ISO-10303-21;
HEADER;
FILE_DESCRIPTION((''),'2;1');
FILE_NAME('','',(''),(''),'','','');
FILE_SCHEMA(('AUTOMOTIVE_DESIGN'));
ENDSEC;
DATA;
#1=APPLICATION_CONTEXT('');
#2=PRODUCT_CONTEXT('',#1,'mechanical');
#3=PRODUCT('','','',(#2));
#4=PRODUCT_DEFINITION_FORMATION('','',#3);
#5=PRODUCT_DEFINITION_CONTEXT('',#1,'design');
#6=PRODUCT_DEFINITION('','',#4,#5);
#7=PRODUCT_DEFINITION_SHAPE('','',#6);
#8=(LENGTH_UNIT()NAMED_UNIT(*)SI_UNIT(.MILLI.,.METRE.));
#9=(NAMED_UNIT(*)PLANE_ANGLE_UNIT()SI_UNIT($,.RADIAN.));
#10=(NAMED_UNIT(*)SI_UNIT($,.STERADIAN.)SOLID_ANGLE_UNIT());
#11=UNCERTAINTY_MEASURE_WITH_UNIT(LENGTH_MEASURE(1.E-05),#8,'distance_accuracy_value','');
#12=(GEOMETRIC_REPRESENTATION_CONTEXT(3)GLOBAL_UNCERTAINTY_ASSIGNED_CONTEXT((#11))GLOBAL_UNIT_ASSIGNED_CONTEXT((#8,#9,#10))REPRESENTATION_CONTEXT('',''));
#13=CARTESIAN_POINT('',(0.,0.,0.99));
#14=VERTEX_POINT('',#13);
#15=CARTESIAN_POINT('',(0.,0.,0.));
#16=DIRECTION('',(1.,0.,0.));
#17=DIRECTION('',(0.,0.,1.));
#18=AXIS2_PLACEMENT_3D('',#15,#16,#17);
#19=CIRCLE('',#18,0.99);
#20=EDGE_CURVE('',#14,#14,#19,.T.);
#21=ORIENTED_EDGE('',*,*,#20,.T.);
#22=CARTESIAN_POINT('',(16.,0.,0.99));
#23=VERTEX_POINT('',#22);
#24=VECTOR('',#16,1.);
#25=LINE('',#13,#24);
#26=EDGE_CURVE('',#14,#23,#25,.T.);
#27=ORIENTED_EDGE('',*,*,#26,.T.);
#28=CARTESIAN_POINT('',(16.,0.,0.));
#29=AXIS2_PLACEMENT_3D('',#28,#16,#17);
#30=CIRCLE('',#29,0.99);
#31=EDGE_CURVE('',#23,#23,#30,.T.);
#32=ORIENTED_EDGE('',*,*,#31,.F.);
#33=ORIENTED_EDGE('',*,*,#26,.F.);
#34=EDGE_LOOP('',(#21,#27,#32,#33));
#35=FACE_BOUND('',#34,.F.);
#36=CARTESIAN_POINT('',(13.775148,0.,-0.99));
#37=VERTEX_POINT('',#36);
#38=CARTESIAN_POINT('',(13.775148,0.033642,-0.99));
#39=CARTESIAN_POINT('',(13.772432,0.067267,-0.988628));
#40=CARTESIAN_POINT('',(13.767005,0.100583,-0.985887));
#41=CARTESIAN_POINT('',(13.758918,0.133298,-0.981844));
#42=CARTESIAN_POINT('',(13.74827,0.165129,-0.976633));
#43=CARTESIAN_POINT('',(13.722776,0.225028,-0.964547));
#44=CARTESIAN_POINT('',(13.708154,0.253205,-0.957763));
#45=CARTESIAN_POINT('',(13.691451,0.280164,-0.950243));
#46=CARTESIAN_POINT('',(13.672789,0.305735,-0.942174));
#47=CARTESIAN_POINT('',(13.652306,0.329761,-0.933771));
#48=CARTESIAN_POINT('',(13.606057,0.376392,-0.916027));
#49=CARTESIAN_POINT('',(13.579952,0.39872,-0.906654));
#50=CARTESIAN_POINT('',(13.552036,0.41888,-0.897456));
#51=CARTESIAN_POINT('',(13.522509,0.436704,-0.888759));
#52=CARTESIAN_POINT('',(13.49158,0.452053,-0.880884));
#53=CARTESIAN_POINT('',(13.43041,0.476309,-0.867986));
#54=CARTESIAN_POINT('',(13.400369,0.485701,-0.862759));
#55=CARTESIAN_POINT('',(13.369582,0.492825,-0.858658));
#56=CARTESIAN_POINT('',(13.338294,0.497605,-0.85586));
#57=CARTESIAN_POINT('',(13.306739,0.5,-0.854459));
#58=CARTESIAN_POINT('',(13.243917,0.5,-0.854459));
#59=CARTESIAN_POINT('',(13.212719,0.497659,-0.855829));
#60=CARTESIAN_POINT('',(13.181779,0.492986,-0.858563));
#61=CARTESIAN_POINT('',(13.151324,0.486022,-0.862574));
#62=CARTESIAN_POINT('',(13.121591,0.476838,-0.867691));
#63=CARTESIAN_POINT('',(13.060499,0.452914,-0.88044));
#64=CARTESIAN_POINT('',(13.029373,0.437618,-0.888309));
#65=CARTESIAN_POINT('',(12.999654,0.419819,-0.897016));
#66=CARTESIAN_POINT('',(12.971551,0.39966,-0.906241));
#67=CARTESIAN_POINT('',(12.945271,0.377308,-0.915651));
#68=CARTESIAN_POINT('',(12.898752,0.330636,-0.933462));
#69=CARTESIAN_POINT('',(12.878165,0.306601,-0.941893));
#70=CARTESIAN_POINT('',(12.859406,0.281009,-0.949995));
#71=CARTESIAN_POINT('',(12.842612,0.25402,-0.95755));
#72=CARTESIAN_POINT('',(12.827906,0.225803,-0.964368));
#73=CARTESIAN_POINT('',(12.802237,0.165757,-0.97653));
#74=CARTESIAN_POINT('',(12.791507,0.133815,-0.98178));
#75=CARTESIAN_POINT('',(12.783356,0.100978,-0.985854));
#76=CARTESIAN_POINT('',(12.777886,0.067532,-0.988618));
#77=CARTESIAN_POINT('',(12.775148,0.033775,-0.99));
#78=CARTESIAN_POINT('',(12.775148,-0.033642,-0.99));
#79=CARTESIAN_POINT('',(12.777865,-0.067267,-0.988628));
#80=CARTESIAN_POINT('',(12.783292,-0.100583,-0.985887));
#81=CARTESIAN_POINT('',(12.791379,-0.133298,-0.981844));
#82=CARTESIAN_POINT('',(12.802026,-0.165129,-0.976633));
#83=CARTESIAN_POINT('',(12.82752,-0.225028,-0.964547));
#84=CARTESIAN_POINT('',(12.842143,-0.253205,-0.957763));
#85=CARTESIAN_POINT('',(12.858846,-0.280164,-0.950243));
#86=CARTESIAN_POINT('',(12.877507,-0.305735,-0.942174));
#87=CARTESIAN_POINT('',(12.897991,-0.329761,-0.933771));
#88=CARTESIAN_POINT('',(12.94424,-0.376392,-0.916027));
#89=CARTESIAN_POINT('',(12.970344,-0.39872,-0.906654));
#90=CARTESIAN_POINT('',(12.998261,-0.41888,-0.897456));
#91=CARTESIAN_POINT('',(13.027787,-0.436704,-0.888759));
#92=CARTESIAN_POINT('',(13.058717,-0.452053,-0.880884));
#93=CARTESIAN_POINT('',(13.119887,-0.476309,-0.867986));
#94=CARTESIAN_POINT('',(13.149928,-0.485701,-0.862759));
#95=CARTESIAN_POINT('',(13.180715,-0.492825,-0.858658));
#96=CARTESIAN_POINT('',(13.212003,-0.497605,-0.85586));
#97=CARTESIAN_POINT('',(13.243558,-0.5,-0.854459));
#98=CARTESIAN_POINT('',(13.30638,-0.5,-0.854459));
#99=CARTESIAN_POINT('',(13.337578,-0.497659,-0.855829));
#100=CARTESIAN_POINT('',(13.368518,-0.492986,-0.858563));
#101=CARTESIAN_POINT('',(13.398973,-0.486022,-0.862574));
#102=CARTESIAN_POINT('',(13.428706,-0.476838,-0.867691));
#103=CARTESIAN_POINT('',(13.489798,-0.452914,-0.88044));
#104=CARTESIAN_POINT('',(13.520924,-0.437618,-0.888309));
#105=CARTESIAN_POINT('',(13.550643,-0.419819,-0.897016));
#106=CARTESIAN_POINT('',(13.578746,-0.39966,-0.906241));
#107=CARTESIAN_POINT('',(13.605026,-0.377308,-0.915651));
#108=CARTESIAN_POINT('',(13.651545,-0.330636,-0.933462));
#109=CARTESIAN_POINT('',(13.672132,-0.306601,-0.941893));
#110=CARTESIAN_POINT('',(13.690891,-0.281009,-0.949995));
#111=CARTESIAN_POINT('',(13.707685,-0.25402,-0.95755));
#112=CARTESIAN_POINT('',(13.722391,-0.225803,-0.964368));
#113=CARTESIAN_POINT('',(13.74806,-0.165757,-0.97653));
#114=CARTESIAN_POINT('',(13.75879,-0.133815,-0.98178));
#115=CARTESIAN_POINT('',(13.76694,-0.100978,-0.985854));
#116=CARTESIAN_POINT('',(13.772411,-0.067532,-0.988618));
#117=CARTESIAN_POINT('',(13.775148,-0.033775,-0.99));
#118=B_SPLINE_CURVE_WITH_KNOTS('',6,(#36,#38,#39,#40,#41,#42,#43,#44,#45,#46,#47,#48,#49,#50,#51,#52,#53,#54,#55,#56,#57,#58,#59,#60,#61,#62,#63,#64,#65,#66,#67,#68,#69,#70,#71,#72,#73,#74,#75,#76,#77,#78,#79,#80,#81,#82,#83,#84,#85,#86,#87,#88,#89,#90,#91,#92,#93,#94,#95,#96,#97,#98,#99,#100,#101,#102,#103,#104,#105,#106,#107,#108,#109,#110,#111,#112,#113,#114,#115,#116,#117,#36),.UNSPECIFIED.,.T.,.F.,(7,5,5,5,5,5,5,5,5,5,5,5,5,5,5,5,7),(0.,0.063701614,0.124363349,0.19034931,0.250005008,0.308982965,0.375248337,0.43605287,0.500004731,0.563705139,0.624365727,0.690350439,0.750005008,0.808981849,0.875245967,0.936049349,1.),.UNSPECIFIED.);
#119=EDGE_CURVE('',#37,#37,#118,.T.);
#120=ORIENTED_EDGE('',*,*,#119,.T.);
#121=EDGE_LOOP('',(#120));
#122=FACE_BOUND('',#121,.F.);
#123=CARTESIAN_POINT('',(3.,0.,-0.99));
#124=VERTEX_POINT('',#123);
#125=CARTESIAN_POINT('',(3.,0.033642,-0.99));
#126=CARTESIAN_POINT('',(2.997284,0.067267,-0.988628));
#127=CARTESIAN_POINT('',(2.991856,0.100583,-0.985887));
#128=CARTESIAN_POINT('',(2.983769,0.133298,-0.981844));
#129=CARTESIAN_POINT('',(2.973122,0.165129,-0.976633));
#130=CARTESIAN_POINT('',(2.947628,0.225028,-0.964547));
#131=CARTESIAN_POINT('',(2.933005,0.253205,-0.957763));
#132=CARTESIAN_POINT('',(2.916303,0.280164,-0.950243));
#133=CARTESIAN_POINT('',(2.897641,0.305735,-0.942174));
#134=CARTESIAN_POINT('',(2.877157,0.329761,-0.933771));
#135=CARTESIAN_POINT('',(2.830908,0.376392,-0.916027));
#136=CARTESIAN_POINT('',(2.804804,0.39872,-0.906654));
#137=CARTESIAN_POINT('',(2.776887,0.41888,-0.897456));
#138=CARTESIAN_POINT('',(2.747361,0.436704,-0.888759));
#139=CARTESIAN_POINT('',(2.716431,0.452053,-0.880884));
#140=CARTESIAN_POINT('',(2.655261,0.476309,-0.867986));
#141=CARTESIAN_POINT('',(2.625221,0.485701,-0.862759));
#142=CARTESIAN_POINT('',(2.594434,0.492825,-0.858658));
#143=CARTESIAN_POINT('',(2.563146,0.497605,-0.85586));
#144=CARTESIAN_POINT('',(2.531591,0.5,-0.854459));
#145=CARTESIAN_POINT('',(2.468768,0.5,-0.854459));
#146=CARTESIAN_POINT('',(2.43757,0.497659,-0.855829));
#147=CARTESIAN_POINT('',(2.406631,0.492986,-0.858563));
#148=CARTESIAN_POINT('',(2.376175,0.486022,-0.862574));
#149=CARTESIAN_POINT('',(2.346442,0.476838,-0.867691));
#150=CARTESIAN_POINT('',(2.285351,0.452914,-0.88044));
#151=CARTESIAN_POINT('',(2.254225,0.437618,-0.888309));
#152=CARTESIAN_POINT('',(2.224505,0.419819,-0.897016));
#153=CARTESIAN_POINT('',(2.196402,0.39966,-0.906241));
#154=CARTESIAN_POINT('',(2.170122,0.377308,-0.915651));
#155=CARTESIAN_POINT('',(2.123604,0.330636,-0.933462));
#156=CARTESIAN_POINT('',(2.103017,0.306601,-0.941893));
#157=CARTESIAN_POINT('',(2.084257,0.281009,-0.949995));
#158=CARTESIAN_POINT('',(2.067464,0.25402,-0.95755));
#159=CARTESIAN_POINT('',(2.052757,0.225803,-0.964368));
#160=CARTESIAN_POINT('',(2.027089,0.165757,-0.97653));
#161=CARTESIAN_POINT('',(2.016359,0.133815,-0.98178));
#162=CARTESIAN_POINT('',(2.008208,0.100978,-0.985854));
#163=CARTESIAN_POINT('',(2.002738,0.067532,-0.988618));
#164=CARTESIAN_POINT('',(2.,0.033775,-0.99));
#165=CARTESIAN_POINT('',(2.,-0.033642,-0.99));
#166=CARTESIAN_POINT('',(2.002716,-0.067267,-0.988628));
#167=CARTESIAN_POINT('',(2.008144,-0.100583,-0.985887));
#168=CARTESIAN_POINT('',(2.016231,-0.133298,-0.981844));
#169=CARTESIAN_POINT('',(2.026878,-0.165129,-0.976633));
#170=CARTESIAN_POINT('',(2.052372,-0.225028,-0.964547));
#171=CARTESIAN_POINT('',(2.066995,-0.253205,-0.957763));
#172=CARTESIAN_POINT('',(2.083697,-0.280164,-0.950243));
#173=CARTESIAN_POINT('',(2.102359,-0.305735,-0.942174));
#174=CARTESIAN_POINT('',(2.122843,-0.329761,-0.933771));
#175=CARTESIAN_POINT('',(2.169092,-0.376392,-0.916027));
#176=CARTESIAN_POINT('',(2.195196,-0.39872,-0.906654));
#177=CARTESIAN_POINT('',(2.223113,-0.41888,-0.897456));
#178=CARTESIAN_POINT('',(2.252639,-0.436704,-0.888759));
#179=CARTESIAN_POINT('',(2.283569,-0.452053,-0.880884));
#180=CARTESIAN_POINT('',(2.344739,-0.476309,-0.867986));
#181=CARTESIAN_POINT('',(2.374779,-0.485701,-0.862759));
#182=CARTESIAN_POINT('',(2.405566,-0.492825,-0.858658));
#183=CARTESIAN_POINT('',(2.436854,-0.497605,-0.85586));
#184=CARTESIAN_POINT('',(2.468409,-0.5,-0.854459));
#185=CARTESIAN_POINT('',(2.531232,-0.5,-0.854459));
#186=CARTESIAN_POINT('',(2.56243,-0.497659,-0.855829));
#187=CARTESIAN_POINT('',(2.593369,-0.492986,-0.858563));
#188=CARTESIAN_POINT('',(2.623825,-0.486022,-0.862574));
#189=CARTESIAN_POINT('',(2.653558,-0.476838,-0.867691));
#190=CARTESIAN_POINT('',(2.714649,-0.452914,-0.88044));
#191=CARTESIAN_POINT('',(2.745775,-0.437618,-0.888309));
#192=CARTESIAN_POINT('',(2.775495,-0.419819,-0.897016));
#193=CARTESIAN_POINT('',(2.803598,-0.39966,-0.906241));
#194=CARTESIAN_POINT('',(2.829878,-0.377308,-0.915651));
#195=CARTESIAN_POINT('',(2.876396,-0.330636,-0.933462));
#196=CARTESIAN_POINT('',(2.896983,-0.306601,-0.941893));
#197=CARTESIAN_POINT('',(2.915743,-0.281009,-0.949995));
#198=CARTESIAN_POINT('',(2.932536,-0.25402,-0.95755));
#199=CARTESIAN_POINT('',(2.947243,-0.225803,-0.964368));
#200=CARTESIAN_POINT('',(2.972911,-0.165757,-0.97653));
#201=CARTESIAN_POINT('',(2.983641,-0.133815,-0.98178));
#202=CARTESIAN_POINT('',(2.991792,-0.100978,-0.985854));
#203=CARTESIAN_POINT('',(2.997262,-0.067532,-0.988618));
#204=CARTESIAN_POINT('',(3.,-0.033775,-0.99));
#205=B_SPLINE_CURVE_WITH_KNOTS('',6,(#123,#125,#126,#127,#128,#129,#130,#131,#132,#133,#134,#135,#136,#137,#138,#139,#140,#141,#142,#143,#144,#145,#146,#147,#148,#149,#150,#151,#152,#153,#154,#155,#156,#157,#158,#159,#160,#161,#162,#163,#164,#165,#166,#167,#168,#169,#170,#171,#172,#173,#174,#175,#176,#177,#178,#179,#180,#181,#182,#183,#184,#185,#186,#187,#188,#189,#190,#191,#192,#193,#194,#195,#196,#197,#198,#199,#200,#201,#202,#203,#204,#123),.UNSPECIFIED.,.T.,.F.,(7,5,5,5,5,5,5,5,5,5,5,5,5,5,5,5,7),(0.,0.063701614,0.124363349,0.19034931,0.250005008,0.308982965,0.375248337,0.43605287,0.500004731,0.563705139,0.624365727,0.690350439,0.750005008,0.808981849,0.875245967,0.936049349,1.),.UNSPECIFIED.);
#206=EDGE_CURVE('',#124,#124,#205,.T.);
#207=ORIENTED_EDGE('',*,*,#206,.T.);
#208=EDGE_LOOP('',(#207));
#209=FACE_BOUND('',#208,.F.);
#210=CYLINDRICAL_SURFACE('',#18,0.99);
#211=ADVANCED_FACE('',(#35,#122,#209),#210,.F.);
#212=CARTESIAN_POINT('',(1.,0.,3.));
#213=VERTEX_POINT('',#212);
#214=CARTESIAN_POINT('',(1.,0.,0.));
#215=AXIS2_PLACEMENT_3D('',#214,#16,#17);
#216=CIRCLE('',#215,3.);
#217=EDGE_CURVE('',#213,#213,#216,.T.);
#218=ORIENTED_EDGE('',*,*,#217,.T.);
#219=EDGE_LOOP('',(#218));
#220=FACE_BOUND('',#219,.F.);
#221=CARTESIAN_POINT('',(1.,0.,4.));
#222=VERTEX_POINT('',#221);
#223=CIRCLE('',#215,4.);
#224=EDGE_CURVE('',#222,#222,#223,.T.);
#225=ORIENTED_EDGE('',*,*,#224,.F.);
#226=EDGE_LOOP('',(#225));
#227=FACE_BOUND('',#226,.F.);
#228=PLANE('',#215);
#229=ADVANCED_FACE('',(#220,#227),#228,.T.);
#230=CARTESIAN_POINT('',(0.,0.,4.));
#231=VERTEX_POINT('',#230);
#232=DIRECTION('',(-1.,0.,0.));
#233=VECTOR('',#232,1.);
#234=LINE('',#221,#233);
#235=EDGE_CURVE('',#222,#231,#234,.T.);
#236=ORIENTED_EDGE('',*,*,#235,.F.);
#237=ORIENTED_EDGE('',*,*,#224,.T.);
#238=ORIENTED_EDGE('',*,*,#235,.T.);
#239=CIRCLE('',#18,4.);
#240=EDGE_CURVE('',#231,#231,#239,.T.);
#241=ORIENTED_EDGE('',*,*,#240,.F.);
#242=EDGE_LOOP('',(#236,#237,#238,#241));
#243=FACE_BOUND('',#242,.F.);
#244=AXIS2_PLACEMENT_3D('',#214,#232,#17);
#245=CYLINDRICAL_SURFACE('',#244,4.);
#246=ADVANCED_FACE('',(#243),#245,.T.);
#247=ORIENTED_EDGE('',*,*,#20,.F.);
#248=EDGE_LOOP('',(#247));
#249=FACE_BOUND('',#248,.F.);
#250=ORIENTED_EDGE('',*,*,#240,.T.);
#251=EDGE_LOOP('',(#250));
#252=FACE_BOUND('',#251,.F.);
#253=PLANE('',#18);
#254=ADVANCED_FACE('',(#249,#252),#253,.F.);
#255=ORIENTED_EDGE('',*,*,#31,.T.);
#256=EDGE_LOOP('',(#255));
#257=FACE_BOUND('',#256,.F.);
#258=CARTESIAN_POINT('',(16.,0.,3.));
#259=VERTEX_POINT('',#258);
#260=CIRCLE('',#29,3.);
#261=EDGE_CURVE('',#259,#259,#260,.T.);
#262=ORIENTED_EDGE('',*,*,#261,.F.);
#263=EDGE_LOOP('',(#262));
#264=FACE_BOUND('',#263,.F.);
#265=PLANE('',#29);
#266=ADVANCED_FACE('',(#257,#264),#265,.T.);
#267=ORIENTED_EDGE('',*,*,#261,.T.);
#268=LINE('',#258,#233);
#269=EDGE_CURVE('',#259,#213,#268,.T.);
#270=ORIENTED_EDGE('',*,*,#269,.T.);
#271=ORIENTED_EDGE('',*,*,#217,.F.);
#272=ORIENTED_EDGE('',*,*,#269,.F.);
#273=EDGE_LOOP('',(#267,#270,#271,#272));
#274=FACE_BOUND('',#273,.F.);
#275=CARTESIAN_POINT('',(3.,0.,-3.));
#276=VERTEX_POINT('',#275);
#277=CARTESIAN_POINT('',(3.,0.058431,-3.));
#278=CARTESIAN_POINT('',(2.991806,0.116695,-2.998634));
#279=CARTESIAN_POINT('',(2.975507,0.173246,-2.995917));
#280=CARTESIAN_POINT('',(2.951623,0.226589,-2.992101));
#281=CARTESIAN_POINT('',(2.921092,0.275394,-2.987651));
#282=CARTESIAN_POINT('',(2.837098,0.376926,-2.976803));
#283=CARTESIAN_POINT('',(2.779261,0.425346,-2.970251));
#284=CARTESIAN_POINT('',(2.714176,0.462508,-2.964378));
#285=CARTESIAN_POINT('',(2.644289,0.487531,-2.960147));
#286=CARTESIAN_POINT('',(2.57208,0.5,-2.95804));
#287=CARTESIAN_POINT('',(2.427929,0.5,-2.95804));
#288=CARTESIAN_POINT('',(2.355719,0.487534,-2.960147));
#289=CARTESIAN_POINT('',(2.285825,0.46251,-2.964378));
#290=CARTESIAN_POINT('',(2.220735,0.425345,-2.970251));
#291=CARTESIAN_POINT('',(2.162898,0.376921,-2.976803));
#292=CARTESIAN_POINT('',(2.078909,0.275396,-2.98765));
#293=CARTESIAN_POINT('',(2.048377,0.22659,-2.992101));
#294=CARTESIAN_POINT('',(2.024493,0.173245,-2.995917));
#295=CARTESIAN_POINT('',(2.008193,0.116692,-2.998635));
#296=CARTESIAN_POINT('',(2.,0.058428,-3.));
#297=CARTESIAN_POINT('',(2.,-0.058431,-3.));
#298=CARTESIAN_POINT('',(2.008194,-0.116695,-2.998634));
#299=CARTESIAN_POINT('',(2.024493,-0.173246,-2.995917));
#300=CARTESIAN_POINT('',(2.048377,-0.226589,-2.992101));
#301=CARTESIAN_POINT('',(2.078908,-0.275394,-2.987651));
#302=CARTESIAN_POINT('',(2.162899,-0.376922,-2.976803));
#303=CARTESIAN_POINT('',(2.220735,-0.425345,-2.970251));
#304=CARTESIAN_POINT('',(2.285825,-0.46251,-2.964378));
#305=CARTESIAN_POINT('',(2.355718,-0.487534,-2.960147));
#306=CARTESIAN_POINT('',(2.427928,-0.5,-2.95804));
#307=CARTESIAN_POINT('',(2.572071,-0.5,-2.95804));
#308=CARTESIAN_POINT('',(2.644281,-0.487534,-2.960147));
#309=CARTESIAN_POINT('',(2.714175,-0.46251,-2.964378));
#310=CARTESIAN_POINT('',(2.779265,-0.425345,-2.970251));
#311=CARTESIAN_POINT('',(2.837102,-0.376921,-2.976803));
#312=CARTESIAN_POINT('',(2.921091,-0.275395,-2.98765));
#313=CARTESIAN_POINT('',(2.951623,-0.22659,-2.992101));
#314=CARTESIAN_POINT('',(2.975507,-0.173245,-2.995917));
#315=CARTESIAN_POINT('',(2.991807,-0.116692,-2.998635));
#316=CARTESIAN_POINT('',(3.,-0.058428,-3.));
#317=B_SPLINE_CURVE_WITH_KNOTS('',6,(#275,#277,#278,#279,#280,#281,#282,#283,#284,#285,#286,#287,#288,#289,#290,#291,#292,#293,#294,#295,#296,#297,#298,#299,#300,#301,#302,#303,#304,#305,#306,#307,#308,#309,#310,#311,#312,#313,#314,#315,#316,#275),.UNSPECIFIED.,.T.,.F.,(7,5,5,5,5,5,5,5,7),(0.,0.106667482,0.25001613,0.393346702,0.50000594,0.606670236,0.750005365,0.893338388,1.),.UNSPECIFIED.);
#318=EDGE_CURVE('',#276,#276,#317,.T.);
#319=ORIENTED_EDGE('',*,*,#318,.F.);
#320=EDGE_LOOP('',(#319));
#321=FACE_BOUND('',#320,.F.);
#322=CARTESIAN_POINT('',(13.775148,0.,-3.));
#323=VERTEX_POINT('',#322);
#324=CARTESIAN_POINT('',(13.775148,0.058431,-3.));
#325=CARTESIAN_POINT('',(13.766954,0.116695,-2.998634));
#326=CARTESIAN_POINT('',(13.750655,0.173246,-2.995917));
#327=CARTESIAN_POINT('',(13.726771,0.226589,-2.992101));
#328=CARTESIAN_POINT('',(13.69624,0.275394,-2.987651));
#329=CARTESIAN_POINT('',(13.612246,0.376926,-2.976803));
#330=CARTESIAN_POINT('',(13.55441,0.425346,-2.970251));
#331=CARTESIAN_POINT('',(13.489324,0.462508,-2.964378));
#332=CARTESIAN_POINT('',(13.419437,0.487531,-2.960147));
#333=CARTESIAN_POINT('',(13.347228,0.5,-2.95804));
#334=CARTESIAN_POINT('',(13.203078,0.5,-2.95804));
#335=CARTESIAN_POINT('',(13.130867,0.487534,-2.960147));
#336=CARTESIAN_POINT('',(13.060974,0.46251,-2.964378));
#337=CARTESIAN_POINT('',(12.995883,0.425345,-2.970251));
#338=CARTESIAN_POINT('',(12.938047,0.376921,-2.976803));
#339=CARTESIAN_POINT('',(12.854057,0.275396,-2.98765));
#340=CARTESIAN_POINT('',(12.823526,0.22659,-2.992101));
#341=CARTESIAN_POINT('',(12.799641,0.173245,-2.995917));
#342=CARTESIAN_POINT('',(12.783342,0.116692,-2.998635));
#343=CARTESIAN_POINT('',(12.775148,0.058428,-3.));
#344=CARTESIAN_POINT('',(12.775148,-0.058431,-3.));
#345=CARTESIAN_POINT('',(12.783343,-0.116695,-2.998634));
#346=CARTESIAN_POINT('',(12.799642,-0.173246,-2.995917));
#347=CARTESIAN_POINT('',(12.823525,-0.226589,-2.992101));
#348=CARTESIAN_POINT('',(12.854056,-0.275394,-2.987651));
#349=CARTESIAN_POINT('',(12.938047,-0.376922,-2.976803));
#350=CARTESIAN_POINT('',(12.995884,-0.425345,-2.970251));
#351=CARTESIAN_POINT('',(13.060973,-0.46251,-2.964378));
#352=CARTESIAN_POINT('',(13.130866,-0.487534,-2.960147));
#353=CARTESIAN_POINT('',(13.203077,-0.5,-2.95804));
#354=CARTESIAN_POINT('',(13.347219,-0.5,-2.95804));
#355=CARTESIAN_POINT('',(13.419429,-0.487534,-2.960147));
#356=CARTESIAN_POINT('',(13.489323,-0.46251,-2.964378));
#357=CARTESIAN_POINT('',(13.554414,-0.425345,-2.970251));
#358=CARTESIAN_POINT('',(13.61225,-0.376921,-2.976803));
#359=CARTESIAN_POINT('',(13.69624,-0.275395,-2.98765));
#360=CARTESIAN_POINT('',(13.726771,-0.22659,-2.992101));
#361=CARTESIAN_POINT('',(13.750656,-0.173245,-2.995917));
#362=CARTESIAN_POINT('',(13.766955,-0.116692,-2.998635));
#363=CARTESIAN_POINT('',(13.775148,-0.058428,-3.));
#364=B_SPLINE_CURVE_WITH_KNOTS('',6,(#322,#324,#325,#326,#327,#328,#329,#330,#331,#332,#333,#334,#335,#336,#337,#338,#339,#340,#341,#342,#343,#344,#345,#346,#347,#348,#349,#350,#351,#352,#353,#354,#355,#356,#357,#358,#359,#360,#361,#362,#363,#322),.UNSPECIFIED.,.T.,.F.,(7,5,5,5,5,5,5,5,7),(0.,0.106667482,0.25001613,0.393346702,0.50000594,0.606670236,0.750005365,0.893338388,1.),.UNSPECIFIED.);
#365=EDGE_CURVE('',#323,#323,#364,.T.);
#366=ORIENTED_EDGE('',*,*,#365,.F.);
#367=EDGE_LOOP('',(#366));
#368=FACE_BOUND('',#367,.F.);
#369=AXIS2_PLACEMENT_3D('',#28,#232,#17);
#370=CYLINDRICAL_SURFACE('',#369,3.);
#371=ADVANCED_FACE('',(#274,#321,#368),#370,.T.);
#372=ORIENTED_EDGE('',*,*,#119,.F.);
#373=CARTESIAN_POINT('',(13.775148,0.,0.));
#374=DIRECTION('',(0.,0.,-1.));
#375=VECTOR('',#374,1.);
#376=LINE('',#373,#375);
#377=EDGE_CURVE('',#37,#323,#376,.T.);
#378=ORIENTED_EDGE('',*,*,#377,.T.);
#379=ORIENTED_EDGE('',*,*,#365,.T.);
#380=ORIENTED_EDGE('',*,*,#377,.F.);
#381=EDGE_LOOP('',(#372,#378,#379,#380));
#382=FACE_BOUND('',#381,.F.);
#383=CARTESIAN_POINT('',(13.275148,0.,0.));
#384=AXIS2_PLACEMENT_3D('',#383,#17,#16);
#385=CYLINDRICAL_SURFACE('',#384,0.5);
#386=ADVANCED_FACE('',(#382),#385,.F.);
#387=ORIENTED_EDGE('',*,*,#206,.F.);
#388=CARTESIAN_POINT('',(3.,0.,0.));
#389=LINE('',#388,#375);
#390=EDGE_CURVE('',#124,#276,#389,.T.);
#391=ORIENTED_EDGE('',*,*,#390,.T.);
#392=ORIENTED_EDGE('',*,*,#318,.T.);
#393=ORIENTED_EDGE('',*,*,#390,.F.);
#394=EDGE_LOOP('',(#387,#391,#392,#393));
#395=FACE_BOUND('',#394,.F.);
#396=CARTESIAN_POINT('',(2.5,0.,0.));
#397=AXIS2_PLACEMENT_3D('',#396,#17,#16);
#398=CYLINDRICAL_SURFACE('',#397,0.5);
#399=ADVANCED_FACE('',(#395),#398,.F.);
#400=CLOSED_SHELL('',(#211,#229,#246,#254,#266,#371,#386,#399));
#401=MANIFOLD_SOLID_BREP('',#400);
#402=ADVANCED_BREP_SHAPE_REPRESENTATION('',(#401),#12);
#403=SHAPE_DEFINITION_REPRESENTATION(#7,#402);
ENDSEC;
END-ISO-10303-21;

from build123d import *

# Parameters (mm, degrees)
F2_R     = 0.5
F3_DEPTH = 4.001


# Not quite as in the source:
# - a feature names something its author has since deleted; it is built from what else it names


with BuildPart() as f1:
    # F0 (on Front) → F1 (revolve)
    with BuildSketch(Plane.XZ):
        Polygon((0, 4), (0, 0.99), (16, 0.99), (16, 3), (1, 3), (1, 4), align=None)
    revolve(axis=Axis((-1.1582460975, 0, 0), (1, 0, 0)))

    # F2 (on Top) → F3 (cut, through all)
    with BuildSketch(Plane.XY):
        with Locations((2.5, 0)):
            Circle(F2_R)
        with Locations((13.275148347, 0)):
            Circle(F2_R)
    extrude(amount=-F3_DEPTH, mode=Mode.SUBTRACT)


solid = f1.part
